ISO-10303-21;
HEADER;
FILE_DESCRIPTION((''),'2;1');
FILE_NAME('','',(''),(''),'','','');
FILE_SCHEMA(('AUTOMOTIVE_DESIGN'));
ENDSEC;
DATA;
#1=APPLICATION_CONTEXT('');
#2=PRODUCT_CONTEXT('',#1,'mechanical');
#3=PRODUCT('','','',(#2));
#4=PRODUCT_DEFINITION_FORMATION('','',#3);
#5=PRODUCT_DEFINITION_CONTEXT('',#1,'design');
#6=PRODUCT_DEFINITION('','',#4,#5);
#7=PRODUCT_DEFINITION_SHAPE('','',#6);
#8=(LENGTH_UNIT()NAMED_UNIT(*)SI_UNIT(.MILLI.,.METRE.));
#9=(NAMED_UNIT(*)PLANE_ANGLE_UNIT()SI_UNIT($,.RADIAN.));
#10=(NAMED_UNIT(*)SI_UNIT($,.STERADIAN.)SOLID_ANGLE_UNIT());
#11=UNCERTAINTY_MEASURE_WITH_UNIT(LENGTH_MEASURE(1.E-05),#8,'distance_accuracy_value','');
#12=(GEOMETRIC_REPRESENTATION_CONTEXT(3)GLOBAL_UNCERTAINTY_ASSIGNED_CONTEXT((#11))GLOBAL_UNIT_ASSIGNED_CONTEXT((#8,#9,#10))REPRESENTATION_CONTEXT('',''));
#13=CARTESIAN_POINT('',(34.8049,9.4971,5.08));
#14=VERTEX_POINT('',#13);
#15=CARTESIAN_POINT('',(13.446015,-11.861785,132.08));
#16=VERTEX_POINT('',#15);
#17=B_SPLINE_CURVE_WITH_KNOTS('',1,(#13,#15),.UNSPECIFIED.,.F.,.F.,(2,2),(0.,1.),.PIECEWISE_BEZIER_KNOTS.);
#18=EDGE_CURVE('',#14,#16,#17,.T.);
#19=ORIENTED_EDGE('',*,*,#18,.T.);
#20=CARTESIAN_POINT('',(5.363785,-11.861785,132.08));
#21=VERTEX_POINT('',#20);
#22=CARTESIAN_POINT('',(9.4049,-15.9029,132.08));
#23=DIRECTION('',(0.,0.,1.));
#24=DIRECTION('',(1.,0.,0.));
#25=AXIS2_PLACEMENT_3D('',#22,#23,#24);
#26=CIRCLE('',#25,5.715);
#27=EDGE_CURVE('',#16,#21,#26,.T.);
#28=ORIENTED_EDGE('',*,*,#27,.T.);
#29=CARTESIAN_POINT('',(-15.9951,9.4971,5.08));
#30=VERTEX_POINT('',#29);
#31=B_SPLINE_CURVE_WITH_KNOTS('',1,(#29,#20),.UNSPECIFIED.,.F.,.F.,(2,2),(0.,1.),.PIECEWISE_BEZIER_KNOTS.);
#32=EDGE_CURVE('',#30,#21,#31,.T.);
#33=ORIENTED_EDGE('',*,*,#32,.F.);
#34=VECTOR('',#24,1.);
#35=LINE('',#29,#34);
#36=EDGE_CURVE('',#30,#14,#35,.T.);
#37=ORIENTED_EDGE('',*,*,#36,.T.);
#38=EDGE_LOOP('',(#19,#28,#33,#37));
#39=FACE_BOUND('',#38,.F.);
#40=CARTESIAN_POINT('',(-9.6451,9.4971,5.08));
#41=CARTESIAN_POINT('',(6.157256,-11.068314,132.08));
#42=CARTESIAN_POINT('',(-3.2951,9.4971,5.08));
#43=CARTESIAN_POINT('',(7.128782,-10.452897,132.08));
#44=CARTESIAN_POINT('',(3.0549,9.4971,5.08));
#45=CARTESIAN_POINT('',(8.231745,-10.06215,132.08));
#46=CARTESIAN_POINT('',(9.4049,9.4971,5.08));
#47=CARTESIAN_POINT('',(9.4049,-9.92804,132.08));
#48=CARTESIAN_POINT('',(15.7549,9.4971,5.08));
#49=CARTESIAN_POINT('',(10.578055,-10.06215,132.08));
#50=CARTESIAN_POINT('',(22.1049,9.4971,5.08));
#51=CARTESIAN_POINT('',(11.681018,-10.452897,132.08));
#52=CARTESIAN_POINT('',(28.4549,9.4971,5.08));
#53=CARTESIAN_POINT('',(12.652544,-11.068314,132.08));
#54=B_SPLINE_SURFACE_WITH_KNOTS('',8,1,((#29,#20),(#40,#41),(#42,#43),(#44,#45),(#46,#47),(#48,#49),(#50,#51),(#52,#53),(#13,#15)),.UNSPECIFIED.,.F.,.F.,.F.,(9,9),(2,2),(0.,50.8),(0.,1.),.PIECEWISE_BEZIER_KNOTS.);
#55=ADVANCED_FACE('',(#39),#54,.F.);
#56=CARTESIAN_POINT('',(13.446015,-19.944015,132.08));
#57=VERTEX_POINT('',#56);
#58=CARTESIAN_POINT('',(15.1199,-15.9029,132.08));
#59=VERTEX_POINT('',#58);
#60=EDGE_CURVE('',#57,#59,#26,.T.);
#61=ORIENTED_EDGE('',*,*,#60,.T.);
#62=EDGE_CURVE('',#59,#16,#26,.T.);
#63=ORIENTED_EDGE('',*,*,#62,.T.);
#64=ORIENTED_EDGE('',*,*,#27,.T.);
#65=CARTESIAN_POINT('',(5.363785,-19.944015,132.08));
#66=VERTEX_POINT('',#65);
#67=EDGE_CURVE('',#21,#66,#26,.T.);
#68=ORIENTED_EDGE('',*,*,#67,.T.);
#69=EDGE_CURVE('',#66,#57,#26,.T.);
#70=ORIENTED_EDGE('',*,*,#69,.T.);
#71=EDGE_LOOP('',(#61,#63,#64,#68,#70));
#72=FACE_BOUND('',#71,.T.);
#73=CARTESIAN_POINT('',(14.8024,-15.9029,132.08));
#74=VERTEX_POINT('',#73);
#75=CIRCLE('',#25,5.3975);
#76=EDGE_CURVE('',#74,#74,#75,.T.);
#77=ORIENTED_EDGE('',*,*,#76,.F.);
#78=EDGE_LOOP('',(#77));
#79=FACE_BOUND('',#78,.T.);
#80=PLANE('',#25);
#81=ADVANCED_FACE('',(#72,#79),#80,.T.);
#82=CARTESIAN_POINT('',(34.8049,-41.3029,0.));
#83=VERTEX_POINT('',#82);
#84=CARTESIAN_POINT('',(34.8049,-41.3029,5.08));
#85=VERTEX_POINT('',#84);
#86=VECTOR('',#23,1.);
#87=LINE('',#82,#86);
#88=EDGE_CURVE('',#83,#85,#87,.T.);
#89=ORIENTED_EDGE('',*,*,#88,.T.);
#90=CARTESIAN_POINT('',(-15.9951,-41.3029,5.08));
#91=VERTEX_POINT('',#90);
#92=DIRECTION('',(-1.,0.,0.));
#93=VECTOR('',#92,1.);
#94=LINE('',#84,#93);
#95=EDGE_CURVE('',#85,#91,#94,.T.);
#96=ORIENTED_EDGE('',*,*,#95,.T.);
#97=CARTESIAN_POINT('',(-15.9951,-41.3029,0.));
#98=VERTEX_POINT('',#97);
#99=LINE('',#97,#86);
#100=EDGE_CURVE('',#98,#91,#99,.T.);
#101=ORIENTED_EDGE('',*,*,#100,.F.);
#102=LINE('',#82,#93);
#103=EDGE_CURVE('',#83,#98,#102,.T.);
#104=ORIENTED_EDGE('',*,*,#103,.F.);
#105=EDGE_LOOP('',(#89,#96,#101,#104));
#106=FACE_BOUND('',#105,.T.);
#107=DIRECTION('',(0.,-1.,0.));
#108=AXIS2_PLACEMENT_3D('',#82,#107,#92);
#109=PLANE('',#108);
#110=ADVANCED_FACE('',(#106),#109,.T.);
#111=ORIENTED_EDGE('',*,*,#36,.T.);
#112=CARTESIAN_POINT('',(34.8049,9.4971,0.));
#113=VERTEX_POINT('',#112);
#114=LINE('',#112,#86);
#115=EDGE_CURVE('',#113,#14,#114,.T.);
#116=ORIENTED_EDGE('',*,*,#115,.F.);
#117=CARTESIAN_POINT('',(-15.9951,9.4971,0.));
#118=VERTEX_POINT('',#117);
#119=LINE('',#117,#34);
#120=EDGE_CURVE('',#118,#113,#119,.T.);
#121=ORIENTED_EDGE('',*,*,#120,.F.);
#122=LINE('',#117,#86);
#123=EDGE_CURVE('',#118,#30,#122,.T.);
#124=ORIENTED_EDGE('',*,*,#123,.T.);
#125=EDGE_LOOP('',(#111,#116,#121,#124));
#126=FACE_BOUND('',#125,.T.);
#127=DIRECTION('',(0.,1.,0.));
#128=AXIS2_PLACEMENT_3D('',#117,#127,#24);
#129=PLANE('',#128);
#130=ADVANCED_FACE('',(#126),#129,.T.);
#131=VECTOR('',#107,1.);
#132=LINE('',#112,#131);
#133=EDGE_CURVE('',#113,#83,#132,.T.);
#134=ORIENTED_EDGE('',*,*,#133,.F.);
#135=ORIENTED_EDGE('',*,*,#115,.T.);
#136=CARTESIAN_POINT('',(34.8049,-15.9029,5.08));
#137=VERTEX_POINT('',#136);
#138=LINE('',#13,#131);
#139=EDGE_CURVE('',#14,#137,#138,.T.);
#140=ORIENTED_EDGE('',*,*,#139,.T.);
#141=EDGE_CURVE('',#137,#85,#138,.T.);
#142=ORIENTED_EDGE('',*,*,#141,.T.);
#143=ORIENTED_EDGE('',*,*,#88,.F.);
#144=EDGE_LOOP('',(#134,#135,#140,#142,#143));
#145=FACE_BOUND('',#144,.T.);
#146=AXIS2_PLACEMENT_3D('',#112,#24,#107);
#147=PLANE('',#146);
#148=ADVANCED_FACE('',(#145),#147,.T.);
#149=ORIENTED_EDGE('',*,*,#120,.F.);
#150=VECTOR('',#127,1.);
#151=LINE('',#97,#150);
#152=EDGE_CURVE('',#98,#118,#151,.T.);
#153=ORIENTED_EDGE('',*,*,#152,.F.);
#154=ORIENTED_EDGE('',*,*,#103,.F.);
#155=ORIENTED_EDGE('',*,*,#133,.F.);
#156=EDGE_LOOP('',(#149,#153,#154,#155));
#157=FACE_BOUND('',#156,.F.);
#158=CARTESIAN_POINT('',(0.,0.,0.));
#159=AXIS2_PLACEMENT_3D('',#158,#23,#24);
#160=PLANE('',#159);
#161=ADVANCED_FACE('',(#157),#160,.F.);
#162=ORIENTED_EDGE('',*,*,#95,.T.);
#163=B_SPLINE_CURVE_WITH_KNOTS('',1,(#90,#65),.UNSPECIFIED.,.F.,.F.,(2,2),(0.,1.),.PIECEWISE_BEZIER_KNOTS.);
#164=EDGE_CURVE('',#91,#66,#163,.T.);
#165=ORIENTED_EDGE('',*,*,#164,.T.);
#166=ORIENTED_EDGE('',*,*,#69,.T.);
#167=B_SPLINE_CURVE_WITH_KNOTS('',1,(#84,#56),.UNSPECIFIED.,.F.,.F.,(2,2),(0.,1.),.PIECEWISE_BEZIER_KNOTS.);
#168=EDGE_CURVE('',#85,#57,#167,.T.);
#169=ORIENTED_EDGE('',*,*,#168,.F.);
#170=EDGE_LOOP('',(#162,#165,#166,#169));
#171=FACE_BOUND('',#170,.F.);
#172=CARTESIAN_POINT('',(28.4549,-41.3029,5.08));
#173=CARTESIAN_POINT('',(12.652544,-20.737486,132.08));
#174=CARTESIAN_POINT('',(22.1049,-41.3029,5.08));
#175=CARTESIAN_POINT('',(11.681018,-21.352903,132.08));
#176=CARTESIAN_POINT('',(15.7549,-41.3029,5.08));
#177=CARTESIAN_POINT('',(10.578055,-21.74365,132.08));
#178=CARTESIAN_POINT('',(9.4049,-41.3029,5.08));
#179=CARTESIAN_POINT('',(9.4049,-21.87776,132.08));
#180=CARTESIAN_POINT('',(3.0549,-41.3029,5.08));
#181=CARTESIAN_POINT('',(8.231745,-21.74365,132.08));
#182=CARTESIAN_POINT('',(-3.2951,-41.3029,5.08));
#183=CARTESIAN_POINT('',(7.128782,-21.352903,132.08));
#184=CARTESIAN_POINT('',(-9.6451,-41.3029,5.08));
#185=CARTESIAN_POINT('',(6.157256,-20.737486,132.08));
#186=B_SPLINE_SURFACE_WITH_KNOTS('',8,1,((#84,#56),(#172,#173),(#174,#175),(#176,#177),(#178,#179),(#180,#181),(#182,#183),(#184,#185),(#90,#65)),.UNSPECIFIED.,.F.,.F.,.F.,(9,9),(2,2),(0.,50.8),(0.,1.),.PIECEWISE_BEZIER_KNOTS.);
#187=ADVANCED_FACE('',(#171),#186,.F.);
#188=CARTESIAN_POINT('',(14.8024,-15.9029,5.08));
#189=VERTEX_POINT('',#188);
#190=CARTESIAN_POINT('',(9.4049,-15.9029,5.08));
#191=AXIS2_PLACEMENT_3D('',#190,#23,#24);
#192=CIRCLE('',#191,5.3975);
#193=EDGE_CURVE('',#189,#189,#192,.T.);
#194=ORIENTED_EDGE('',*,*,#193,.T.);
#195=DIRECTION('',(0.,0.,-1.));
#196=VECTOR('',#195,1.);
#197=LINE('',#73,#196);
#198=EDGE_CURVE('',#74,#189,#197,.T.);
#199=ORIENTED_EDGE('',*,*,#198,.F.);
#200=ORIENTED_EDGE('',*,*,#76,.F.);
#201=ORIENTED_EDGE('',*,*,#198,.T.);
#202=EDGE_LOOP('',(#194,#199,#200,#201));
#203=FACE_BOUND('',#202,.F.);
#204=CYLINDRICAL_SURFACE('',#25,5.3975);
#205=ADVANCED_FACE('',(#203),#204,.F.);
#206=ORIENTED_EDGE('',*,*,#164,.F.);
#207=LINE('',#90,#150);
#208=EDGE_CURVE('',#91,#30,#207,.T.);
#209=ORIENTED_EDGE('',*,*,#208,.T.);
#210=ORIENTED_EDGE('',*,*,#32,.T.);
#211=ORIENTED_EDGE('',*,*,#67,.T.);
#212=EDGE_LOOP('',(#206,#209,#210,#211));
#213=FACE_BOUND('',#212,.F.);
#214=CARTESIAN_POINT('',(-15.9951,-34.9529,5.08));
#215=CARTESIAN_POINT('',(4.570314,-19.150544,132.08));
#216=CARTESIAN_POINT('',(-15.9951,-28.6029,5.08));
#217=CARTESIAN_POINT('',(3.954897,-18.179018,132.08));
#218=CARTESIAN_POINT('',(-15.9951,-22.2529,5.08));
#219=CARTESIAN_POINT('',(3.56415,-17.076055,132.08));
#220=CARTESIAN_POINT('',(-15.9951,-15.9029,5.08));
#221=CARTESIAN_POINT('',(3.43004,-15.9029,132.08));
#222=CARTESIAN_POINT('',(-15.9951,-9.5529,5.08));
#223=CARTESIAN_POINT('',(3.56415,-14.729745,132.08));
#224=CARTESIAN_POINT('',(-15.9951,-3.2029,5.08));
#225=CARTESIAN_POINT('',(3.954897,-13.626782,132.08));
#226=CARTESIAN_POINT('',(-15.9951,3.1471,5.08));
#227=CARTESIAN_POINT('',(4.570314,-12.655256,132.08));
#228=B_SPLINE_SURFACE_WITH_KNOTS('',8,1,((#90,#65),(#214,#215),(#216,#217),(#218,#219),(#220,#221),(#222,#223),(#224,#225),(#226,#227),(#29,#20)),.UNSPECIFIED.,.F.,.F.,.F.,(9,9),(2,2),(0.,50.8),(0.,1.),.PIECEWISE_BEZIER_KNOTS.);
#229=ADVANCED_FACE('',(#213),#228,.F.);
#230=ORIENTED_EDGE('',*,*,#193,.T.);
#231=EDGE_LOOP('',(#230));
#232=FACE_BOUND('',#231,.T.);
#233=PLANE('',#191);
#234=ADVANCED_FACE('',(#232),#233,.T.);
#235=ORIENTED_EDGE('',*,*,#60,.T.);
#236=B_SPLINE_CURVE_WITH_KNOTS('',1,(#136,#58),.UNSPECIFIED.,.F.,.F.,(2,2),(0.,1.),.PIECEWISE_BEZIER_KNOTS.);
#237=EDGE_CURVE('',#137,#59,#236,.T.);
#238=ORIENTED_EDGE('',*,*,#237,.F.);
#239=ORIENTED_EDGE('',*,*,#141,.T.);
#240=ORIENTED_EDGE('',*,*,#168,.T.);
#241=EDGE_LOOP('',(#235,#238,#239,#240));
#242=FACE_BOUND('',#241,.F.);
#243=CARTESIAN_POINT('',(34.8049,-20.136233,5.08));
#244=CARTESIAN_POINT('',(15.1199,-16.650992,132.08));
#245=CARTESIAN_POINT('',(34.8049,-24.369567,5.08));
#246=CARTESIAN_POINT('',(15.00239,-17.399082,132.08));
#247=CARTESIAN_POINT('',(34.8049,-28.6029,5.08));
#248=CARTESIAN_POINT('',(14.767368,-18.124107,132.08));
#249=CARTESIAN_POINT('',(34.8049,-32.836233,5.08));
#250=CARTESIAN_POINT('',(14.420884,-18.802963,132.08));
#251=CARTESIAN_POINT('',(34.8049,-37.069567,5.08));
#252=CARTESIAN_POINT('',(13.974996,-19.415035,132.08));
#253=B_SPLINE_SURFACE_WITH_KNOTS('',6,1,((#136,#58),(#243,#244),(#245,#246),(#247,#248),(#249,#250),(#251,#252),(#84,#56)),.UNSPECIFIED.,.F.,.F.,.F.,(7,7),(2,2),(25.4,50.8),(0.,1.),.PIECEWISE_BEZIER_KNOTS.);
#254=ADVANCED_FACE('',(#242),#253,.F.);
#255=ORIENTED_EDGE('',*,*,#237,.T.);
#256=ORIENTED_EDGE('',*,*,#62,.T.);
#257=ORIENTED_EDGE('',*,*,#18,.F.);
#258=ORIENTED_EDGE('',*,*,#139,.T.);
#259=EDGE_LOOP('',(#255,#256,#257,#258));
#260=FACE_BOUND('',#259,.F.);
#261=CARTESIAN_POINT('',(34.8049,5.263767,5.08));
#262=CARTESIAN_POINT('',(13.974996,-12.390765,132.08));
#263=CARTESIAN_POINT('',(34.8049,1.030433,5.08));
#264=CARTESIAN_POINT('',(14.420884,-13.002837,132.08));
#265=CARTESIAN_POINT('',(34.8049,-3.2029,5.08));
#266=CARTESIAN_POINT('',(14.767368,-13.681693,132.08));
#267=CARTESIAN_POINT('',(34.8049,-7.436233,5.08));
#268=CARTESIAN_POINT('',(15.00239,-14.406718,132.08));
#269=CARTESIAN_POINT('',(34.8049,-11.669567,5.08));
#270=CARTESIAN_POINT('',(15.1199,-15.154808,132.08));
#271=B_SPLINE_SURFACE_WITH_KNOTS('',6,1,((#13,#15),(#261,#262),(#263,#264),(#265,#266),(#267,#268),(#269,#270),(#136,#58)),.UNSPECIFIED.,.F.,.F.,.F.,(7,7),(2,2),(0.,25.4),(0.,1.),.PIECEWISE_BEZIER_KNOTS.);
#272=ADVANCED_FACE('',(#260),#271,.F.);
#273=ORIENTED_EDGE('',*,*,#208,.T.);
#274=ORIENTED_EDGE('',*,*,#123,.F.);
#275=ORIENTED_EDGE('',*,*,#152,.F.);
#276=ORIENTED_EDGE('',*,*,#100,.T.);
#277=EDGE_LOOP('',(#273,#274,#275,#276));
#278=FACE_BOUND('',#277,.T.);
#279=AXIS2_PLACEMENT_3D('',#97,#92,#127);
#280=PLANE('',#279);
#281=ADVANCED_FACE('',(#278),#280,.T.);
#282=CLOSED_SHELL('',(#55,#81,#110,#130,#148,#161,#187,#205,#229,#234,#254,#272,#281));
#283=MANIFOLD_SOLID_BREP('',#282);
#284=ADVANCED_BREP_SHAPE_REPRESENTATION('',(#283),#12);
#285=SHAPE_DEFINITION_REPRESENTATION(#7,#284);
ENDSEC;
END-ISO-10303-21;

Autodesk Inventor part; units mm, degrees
ref_plane "YZ Plane" through (0, 0, 0) normal (1, 0, 0) x (0, 1, 0)
ref_plane "XZ Plane" through (0, 0, 0) normal (0, 1, 0) x (-1, 0, 0)
ref_plane "XY Plane" through (0, 0, 0) normal (0, 0, 1) x (1, 0, 0)
sketch "Sketch1" plane through (0, 0, 0) normal (0, 0, 1) x (1, 0, 0)
  line L0 (-15.9951, 9.4971) -> (34.8049, 9.4971)
  line L1 (34.8049, 9.4971) -> (34.8049, -41.3029)
  line L2 (34.8049, -41.3029) -> (-15.9951, -41.3029)
  line L3 (-15.9951, -41.3029) -> (-15.9951, 9.4971)
  point P0 (0, 0)
  dimension "d0" = 50.8
  dimension "d1" = 50.8
extrude "Extrusion1" add sketch "Sketch1" along normal blind 5.08
ref_plane "Work Plane1" through (0, 0, 132.08) normal (0, 0, 1) x (1, 0, 0)
sketch "Sketch2" plane through (0, 0, 5.08) normal (0, 0, 1) x (1, 0, 0)
  point P0 (0, 0)
sketch "Sketch3" plane through (0, 0, 132.08) normal (0, 0, 1) x (1, 0, 0)
  line L0 (34.8049, 9.4971) -> (-15.9951, 9.4971) projected
  line L1 (-15.9951, -41.3029) -> (34.8049, -41.3029) projected
  line L2 (-15.9951, 9.4971) -> (34.8049, -41.3029) construction
  line L3 (34.8049, 9.4971) -> (-15.9951, -41.3029) construction
  circle A0 centre (9.4049, -15.9029) radius 5.715
  point P0 (0, 0)
  dimension "d5" = 11.43
loft "Loft1" add profiles "Sketch3" section 1 edges at (9.4049, 9.4971, 5.08) (-15.9951, -15.9029, 5.08) (9.4049, -41.3029, 5.08) (34.8049, -15.9029, 5.08)
sketch "Sketch4" plane through (9.4049, -15.9029, 132.08) normal (0, 0, 1) x (1, 0, 0)
  circle A0 centre (0, 0) radius 5.3975
  point P0 (-9.4049, 15.9029)
  dimension "d11" = 10.795
extrude "Extrusion2" cut sketch "Sketch4" against normal blind 127
properties part number "arrowadaptor"
